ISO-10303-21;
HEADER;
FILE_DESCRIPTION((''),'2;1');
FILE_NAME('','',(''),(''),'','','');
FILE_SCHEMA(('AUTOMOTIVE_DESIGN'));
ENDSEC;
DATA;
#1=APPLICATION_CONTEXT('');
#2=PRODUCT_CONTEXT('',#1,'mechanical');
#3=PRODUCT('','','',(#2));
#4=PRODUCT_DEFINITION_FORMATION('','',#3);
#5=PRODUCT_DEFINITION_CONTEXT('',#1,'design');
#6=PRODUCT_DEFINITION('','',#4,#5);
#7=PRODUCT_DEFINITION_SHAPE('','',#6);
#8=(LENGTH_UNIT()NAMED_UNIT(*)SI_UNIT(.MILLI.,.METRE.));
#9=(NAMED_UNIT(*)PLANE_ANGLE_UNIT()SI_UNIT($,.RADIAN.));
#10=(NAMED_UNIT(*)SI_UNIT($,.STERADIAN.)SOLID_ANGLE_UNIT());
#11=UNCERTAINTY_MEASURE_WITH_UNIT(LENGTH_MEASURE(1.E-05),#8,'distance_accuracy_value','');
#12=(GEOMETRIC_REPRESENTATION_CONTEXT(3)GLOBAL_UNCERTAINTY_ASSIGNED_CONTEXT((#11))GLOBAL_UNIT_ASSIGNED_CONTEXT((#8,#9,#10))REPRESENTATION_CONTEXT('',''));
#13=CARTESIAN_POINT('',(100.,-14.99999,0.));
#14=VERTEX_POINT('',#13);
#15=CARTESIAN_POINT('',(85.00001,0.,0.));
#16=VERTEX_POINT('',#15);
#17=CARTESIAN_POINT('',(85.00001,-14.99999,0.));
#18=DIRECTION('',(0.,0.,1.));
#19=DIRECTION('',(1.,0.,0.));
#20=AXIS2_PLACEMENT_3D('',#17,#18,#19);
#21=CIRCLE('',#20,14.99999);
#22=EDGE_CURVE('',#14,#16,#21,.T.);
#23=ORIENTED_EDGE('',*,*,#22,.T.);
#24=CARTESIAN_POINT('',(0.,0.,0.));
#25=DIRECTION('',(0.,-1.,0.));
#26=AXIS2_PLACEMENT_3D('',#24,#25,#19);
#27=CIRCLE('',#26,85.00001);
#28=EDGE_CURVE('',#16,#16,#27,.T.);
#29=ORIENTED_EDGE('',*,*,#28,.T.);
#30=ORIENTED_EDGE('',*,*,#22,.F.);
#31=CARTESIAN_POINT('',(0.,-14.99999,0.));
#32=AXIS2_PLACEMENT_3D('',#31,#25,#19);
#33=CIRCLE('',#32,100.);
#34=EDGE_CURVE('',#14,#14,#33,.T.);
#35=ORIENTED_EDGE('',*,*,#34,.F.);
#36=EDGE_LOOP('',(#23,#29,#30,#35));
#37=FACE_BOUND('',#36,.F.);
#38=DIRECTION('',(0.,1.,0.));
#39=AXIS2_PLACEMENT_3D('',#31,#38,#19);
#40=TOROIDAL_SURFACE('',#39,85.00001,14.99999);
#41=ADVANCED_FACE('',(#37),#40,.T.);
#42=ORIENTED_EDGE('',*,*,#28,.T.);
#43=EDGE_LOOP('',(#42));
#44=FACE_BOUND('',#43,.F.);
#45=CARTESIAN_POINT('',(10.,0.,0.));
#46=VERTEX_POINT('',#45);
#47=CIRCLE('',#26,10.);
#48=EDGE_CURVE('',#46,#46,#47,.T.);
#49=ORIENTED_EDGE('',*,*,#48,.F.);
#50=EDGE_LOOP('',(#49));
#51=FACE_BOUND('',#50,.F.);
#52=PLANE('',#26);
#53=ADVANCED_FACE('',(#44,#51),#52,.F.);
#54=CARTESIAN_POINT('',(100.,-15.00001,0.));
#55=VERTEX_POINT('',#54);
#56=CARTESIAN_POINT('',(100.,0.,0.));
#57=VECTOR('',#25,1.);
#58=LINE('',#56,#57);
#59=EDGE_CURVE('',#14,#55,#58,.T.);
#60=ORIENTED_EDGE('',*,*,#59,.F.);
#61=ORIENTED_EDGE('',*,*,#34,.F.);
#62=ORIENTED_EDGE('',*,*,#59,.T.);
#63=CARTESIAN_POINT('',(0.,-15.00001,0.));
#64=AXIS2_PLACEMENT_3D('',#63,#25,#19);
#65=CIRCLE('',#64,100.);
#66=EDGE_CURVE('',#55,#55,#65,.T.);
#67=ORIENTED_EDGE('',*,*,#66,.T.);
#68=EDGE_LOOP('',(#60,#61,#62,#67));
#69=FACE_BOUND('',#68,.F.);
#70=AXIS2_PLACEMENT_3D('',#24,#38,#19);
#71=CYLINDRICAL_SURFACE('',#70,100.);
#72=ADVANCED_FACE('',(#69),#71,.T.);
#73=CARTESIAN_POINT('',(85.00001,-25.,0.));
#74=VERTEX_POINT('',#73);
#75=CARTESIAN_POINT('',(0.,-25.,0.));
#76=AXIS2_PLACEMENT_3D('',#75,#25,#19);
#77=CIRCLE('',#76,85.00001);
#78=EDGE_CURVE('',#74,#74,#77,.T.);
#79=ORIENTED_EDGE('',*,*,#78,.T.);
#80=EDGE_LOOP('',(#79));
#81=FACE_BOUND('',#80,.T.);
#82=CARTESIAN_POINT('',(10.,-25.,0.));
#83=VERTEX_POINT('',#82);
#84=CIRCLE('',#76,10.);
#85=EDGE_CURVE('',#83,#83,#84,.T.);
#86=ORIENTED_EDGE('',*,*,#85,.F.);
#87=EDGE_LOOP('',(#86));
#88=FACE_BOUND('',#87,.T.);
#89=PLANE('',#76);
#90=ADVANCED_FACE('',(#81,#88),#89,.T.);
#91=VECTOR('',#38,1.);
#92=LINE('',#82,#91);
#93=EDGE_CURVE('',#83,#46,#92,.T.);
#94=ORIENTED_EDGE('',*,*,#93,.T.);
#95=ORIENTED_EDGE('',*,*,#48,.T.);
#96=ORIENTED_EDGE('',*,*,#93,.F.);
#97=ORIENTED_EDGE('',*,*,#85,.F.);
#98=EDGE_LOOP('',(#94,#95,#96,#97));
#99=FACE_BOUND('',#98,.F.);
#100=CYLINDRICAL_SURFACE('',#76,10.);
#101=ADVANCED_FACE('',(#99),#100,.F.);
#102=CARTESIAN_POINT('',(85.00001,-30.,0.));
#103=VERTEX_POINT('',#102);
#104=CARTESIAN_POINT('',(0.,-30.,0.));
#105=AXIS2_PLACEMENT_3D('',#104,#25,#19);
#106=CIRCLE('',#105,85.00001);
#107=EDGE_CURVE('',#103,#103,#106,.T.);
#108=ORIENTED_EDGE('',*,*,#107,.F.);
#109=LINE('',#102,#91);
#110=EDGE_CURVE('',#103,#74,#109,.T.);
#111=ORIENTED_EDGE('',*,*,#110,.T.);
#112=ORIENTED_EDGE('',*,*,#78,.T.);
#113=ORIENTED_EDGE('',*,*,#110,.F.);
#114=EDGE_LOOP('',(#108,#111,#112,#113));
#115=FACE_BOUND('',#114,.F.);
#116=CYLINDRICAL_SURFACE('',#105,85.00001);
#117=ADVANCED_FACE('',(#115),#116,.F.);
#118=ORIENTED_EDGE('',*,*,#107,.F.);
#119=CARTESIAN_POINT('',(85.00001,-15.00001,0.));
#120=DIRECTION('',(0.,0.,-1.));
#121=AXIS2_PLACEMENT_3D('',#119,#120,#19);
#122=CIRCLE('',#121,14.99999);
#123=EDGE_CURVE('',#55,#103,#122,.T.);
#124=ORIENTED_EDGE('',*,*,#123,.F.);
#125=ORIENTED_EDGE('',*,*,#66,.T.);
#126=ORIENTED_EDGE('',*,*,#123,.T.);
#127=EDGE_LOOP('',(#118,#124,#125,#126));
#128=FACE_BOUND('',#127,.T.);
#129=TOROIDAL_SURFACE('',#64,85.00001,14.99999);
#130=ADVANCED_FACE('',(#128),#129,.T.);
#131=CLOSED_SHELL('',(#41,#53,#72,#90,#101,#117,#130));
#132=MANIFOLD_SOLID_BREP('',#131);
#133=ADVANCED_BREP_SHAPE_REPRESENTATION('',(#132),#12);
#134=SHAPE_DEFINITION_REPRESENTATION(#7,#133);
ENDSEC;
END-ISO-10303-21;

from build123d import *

# Parameters (mm, degrees)
F0_R     = 100
F1_DEPTH = 30
F2_R     = 14.99999
F3_DEPTH = 5
F4_R     = 10
F5_DEPTH = 25.001


# Not quite as in the source:
# - a fillet or chamfer is up to 0.001 mm smaller than in the source, because OpenCascade refuses the exact size


with BuildPart() as f1:
    # F0 (on Front) → F1 (new body)
    with BuildSketch(Plane.XZ):
        Circle(F0_R)
    extrude(amount=F1_DEPTH)

    # F2 (radius 15 in the source; OpenCascade refuses exactly that, so slightly less here)
    f2_edges = [f1.edges().sort_by_distance(p)[0] for p in [
        (-100, -30, 0),
        (-100, 0, 0),
    ]]
    fillet(f2_edges, radius=F2_R)

    # F3 (cut): a face of the model
    f3_faces = [f1.faces().sort_by_distance(p)[0] for p in [
        (0, -30, 0),
    ]]
    extrude(f3_faces, amount=-F3_DEPTH, mode=Mode.SUBTRACT)

    # F4 (on face) → F5 (cut, through all)
    with BuildSketch(Plane.XZ.offset(25)):
        Circle(F4_R)
    extrude(amount=-F5_DEPTH, mode=Mode.SUBTRACT)


solid = f1.part
